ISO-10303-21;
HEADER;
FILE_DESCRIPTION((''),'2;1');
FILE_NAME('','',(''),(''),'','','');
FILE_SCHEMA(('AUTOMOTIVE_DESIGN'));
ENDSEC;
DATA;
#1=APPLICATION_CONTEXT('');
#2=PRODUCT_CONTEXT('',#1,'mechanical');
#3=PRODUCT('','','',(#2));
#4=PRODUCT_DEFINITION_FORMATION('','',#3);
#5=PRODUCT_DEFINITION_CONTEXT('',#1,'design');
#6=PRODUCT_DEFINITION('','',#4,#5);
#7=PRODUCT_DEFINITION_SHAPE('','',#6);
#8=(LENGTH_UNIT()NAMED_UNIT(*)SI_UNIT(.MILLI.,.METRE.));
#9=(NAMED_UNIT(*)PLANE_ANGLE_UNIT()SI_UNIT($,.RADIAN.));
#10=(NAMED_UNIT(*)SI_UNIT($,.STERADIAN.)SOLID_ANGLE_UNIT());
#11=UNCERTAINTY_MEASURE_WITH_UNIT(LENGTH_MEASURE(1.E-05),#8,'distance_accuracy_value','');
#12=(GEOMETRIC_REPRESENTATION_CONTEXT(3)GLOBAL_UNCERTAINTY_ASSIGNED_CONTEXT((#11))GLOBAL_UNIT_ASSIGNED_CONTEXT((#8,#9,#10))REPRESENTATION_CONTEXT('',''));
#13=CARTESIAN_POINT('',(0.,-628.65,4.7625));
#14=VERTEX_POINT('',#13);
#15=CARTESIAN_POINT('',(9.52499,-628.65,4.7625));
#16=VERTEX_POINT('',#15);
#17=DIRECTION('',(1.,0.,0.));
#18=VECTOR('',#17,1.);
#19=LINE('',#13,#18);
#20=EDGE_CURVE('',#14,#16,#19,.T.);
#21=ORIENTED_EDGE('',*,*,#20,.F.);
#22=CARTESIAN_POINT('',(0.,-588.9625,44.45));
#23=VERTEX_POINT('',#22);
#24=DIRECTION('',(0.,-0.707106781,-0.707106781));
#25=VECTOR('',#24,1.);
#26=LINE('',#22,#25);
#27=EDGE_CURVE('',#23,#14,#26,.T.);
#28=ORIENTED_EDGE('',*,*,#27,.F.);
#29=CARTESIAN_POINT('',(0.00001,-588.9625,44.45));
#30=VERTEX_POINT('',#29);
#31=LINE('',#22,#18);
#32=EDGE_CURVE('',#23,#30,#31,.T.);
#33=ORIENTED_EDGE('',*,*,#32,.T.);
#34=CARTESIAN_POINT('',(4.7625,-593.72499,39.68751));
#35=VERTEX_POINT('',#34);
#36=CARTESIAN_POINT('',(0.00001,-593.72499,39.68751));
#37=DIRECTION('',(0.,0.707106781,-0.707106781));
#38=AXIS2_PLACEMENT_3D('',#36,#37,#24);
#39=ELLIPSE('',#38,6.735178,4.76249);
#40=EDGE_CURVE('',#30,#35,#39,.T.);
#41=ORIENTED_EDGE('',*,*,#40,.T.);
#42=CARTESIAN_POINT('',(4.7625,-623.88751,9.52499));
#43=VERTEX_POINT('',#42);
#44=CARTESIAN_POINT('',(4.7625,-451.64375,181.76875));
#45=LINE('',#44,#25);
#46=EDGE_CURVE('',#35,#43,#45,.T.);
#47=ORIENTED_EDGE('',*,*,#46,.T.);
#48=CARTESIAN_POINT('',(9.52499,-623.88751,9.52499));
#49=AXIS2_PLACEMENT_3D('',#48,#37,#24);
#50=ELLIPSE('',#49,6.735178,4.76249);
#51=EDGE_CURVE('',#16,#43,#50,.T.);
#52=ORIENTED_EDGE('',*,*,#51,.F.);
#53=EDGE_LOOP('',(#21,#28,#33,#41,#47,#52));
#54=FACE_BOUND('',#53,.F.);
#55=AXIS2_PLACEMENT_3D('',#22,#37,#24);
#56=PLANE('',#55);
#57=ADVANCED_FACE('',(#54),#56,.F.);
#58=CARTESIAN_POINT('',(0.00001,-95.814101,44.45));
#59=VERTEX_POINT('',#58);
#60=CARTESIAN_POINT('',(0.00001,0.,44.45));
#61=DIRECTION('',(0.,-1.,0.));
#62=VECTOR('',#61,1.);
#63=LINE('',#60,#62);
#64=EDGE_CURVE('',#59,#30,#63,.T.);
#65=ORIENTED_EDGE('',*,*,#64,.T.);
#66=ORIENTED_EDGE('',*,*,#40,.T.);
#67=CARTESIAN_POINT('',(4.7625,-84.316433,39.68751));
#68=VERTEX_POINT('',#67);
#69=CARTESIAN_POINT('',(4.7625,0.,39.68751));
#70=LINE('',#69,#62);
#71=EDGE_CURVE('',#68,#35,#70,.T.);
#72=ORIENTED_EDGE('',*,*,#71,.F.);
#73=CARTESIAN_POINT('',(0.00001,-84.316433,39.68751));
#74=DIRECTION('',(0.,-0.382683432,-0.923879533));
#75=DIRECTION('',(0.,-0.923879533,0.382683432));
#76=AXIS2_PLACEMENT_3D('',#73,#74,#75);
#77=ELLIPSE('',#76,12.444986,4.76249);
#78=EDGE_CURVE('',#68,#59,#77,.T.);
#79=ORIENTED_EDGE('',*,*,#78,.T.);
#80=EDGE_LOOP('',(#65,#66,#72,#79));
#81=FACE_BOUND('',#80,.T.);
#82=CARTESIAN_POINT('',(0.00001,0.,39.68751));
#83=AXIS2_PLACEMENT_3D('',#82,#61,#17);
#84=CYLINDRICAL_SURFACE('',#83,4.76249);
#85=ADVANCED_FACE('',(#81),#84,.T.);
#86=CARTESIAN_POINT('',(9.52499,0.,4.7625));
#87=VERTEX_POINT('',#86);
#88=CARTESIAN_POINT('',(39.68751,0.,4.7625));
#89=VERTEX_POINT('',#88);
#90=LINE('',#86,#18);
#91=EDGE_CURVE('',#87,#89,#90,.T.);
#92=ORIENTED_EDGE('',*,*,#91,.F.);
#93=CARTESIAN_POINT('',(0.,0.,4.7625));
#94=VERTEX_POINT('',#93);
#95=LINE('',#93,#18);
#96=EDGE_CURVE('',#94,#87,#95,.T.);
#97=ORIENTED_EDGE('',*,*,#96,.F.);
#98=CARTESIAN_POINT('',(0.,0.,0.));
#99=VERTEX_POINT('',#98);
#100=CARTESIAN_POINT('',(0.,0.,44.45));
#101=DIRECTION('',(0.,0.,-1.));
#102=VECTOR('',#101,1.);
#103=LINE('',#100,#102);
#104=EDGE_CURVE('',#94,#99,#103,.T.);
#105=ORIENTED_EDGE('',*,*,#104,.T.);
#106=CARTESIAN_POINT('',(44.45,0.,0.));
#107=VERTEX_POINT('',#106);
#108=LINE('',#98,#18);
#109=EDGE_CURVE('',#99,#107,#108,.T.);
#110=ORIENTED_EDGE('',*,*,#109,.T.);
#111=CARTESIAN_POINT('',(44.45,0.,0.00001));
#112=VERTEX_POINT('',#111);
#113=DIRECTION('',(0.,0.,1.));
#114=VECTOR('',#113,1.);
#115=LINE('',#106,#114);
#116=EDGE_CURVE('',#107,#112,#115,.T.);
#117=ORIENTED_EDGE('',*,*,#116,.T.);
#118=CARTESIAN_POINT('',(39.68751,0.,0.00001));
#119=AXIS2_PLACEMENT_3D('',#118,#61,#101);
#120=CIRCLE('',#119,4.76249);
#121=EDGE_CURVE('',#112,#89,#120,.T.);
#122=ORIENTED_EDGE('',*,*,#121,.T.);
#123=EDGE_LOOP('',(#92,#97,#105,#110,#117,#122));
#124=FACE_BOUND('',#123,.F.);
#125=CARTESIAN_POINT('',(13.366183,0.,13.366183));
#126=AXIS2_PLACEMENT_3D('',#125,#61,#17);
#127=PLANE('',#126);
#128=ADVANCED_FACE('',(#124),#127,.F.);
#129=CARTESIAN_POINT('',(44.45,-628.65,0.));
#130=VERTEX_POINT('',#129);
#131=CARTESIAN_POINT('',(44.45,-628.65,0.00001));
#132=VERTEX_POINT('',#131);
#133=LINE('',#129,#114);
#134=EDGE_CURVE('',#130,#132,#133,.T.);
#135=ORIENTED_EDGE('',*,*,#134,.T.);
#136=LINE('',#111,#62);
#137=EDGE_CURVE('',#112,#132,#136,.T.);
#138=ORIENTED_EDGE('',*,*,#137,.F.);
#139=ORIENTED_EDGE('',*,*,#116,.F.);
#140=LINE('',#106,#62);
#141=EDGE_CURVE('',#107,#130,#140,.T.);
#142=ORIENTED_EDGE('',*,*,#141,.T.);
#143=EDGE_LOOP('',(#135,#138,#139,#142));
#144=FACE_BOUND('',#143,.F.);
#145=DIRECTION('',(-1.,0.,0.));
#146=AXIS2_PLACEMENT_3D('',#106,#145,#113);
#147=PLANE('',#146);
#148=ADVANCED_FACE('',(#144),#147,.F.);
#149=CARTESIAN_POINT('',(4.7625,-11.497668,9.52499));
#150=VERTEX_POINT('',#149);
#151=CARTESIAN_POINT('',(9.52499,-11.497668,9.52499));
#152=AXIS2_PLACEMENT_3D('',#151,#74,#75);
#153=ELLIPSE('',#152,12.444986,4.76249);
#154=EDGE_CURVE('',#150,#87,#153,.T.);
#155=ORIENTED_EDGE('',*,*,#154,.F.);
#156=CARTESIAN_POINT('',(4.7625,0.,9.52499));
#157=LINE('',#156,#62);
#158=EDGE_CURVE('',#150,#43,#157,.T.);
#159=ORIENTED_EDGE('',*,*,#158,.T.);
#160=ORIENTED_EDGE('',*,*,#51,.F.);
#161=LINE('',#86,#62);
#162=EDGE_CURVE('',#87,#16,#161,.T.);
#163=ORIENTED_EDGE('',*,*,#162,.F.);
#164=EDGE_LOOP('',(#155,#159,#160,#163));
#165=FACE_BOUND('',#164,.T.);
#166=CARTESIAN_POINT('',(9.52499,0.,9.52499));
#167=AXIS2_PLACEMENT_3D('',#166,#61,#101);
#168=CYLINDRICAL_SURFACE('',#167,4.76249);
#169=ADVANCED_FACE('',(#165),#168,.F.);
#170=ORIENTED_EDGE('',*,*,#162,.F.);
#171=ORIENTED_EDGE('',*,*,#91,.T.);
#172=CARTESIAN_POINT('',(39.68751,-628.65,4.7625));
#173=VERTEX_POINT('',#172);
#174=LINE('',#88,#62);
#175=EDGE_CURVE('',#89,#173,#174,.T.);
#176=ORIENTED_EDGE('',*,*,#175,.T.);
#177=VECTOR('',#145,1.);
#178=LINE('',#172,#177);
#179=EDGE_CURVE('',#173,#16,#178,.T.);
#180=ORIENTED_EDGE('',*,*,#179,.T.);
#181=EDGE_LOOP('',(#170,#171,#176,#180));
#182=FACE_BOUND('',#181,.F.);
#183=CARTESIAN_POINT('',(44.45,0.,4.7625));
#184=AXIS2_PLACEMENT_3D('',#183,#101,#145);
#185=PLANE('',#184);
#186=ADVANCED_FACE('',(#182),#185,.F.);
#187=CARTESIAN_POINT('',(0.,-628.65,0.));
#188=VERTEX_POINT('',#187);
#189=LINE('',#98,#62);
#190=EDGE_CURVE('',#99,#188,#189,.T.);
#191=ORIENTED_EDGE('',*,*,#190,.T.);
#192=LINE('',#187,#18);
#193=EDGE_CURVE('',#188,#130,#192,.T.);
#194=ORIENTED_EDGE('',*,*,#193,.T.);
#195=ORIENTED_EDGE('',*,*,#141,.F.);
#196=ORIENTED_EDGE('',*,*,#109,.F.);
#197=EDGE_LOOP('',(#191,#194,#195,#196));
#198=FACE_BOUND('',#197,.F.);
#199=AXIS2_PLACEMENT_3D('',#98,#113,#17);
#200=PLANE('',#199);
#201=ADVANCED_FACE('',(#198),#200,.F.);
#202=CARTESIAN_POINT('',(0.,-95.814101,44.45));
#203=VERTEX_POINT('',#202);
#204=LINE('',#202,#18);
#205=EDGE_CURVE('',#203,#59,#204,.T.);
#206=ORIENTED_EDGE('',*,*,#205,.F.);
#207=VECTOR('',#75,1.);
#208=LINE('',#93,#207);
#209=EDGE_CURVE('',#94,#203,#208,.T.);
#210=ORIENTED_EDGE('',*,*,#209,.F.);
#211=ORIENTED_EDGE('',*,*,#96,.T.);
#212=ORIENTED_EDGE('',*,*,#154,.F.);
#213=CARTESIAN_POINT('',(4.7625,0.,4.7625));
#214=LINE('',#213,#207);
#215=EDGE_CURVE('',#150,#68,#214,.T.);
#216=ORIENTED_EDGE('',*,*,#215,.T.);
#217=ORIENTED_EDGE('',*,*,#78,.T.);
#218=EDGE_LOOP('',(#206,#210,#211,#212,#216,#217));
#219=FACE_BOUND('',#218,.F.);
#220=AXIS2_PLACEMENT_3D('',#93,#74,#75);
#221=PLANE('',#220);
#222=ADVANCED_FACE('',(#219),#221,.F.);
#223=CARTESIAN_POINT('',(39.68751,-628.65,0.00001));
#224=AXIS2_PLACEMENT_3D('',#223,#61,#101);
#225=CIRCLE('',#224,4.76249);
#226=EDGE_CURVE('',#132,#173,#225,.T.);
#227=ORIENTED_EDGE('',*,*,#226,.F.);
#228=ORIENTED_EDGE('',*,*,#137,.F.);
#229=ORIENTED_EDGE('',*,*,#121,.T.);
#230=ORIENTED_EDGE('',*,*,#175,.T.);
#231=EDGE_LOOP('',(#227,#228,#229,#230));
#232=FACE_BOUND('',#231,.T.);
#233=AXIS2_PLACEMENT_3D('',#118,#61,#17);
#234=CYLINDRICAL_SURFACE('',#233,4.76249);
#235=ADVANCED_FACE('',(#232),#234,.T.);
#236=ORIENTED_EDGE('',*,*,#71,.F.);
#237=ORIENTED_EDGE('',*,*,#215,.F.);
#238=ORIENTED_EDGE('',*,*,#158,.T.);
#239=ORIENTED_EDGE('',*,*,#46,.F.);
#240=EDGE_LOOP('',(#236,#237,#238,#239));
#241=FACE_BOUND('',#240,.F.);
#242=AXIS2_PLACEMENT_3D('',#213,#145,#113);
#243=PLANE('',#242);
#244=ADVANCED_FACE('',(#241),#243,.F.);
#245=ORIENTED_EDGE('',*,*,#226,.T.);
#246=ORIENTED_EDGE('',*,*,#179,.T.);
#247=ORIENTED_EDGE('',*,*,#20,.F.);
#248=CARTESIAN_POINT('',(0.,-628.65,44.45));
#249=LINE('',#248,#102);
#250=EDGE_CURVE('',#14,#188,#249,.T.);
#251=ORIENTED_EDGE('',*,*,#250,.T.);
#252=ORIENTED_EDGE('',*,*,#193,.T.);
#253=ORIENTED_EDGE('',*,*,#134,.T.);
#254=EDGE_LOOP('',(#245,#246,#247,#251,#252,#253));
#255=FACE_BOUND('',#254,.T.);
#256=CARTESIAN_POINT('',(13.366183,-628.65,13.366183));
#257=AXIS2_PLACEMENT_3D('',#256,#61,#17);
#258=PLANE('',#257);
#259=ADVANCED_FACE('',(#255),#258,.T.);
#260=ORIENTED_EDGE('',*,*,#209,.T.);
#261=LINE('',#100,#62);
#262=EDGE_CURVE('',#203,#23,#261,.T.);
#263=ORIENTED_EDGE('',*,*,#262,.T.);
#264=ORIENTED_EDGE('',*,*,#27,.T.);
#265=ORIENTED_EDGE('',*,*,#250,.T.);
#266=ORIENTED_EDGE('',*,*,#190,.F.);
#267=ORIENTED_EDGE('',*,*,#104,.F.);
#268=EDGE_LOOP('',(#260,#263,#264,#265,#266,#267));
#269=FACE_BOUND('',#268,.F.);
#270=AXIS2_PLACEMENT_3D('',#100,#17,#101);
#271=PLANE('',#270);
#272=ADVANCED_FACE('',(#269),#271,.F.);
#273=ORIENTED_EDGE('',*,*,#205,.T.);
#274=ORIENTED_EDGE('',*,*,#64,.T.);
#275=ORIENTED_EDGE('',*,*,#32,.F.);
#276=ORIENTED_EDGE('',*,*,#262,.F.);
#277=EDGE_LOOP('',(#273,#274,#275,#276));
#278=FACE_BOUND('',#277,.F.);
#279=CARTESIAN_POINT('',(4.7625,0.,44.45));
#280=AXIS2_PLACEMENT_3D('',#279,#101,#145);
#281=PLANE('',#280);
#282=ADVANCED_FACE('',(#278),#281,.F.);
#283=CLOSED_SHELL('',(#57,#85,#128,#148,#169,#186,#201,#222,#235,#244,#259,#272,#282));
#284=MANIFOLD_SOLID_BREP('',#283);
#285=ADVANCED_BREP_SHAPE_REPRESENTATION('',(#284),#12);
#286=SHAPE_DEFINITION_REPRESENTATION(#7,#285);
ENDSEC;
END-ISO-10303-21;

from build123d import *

# Parameters (mm, degrees)
F1_DEPTH = 628.65
F2_R     = 4.76249
F4_DEPTH = 25.4


# Not quite as in the source:
# - a fillet or chamfer is up to 0.001 mm smaller than in the source, because OpenCascade refuses the exact size


with BuildPart() as f1:
    # F0 (on Front) → F1 (new body)
    with BuildSketch(Plane.XZ):
        Polygon((0, 44.45), (0, 0), (44.45, 0), (44.45, 4.7625), (4.7625, 4.7625), (4.7625, 44.45), align=None)
    extrude(amount=F1_DEPTH)

    # F2 (radius 4.7625 in the source; OpenCascade refuses exactly that, so slightly less here)
    f2_edges = [f1.edges().sort_by_distance(p)[0] for p in [
        (4.7625, -314.325, 4.7625),
        (4.7625, -314.325, 44.45),
        (44.45, -314.325, 4.7625),
    ]]
    fillet(f2_edges, radius=F2_R)

    # F3 (on face) → F4 (cut)
    with BuildSketch(Plane(origin=(0, 0, 0), x_dir=(0, -1, 0), z_dir=(-1, 0, 0))):
        Polygon((0, 44.45), (0, 4.7625), (95.8141007567, 44.45), align=None)
        Polygon((628.65, 44.45), (588.9625, 44.45), (628.65, 4.7625), align=None)
    extrude(amount=-F4_DEPTH, mode=Mode.SUBTRACT)


solid = f1.part
